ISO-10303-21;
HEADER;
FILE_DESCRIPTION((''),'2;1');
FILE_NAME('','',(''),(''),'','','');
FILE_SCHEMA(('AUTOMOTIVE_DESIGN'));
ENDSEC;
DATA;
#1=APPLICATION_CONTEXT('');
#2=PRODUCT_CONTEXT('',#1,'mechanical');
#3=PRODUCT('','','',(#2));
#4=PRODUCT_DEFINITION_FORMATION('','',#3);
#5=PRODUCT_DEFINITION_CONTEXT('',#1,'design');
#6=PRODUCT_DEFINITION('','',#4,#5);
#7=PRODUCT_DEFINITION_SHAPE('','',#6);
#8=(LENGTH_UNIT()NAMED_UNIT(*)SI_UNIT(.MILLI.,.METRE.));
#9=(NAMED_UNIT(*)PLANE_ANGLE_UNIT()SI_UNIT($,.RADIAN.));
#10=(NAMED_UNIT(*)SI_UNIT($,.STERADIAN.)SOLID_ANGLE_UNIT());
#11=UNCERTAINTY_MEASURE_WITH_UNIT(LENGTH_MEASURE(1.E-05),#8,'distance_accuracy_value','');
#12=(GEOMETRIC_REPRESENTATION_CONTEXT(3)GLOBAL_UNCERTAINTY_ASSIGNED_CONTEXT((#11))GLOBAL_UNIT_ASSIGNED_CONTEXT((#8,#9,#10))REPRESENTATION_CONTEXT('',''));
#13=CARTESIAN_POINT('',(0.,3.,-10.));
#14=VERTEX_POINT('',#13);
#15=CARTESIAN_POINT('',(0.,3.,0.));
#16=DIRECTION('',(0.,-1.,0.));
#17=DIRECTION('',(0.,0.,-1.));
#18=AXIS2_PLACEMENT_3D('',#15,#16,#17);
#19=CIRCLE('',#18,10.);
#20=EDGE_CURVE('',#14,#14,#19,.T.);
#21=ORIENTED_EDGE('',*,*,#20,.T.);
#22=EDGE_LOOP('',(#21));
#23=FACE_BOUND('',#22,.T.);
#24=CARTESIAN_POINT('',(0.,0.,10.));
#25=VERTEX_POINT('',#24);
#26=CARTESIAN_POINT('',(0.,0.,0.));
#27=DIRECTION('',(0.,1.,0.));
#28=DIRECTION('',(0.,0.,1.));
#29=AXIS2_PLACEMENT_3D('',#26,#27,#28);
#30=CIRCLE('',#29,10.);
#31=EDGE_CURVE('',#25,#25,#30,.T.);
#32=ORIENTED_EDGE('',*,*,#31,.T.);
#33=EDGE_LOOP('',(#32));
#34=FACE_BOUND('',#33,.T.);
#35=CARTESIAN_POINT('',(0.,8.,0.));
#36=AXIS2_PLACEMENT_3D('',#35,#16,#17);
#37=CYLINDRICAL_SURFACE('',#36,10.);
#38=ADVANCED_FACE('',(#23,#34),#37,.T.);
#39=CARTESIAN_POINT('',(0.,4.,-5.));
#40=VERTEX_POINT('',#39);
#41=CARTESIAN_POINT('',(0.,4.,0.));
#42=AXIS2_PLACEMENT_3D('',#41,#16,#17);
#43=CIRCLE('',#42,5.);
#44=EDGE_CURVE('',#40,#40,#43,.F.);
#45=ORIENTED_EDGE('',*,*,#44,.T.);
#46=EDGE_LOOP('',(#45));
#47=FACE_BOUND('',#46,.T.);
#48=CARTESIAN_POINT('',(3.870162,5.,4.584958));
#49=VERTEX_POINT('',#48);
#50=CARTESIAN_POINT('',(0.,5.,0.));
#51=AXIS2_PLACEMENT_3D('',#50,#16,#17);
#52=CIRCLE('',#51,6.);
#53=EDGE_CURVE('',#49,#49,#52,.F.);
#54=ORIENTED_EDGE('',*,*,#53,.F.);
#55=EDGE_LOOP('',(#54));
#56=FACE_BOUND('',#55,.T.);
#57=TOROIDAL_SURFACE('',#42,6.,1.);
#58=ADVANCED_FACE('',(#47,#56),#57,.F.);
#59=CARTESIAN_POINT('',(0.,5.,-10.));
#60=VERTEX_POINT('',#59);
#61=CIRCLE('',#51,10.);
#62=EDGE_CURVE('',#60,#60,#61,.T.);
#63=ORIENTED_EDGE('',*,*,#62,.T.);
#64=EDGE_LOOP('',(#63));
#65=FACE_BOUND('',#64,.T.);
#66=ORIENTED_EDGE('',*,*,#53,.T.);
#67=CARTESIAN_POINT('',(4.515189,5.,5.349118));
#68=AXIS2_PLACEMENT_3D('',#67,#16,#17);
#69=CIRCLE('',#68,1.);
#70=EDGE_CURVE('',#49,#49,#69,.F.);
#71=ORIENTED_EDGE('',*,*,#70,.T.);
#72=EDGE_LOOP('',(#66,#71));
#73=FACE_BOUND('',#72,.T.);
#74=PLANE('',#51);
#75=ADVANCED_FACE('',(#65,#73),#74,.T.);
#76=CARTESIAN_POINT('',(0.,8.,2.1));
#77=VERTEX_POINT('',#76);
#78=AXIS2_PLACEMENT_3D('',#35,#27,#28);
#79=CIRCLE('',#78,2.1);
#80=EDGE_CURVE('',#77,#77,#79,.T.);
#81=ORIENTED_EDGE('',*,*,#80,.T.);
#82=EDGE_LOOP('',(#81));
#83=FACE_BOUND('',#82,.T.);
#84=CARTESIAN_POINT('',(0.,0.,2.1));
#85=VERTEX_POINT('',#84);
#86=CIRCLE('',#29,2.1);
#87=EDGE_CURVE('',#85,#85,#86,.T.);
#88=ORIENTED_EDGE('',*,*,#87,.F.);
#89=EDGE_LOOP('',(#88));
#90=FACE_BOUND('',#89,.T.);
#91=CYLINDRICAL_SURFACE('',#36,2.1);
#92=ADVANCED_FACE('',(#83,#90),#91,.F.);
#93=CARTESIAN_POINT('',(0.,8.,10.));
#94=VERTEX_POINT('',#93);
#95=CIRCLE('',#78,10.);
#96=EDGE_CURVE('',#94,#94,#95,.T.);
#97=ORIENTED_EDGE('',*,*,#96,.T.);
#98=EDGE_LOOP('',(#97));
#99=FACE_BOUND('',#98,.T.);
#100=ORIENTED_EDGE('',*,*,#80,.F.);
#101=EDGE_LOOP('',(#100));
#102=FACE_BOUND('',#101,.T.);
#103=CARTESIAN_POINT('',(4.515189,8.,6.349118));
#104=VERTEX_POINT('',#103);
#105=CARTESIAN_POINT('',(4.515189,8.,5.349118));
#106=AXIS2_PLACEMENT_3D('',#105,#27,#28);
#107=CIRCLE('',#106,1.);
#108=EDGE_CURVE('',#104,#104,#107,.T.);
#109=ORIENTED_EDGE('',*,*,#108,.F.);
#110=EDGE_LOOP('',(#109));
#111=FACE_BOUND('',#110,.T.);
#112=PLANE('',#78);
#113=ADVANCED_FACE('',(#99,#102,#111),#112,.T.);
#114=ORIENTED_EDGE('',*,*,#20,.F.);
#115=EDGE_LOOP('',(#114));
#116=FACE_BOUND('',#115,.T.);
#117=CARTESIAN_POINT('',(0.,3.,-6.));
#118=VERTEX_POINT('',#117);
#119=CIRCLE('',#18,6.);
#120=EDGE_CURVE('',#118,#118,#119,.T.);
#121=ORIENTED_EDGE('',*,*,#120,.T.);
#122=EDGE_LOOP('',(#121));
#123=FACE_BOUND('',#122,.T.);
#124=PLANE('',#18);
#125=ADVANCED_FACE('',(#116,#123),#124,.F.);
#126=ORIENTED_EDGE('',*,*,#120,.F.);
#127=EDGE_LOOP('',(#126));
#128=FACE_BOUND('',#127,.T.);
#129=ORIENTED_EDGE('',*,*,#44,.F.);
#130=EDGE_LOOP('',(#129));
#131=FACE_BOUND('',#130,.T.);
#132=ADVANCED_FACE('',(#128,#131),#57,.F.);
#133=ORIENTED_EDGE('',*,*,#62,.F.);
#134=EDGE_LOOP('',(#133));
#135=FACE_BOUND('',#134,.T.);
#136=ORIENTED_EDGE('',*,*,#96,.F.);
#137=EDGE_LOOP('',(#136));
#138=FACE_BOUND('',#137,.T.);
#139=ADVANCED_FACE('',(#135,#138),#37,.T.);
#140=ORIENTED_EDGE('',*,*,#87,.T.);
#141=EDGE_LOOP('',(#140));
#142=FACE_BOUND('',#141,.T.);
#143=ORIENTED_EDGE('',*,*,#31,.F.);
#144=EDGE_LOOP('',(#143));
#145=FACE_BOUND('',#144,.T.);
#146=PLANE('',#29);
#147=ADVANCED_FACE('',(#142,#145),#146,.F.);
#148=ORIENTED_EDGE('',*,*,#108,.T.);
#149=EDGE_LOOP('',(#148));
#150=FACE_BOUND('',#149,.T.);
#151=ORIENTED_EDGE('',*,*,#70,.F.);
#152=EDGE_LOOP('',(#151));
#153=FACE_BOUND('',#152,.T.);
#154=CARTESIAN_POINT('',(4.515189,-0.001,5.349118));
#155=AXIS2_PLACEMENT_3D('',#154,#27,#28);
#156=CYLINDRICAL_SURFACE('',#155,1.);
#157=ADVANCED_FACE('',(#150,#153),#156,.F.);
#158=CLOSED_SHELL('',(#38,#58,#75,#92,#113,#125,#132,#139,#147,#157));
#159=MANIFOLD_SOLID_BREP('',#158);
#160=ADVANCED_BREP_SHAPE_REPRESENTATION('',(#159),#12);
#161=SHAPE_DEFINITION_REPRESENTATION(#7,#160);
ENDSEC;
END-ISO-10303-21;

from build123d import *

# Parameters (mm, degrees)
SKETCH_1_R          = 10
SKETCH_1_R_2        = 2.1
EXTRUDE_1_DEPTH     = 8
CUT_EXTRUDE_START   = -3
SKETCH_2_R          = 10
SKETCH_2_R_2        = 5
CUT_EXTRUDE_1_DEPTH = 2
FILLET_1_R          = 1
CUT_EXTRUDE_2_REACH = 18.248
SKETCH_3_R          = 1


with BuildPart() as part:
    # 草图1 → 凸台-拉伸1 (new body)
    with BuildSketch(Plane(origin=(0, 0, 0), x_dir=(1, 0, 0), z_dir=(0, 1, 0))):
        with Locations(Location((0, 0, 0), (0, 0, 270))):
            Circle(SKETCH_1_R)
        with Locations(Location((0, 0, 0), (0, 0, 270))):
            Circle(SKETCH_1_R_2, mode=Mode.SUBTRACT)
    extrude(amount=EXTRUDE_1_DEPTH)

    # 草图2 → 切除-拉伸1 (cut)
    with BuildSketch(Plane.XZ.offset(CUT_EXTRUDE_START)):
        with Locations(Location((0, 0, 0), (0, 0, 270))):
            Circle(SKETCH_2_R)
        with Locations(Location((0, 0, 0), (0, 0, 270))):
            Circle(SKETCH_2_R_2, mode=Mode.SUBTRACT)
    extrude(amount=-CUT_EXTRUDE_1_DEPTH, mode=Mode.SUBTRACT)

    # 圆角1
    fillet_1_edges = [part.edges().sort_by_distance(p)[0] for p in [
        (0, 5, 5),
        (0, 3, 5),
    ]]
    fillet(fillet_1_edges, radius=FILLET_1_R - 0.0001)  # a hair under: the kernel refuses the full size

    # 草图3 → 切除-拉伸2 (cut, up to next)
    with BuildSketch(Plane(origin=(0, 8, 0), x_dir=(1, 0, 0), z_dir=(0, 1, 0)), mode=Mode.PRIVATE) as cut_extrude_2_sk1:
        with Locations(Location((4.515189348, -5.349118166, 0), (0, 0, 270))):
            Circle(SKETCH_3_R)
    cut_extrude_2_tool1 = extrude(cut_extrude_2_sk1.sketch, amount=-CUT_EXTRUDE_2_REACH, mode=Mode.PRIVATE) & part.part
    add(cut_extrude_2_tool1.solids().sort_by_distance((4.515189, 8, 5.349118))[0], mode=Mode.SUBTRACT)


solid = part.part
